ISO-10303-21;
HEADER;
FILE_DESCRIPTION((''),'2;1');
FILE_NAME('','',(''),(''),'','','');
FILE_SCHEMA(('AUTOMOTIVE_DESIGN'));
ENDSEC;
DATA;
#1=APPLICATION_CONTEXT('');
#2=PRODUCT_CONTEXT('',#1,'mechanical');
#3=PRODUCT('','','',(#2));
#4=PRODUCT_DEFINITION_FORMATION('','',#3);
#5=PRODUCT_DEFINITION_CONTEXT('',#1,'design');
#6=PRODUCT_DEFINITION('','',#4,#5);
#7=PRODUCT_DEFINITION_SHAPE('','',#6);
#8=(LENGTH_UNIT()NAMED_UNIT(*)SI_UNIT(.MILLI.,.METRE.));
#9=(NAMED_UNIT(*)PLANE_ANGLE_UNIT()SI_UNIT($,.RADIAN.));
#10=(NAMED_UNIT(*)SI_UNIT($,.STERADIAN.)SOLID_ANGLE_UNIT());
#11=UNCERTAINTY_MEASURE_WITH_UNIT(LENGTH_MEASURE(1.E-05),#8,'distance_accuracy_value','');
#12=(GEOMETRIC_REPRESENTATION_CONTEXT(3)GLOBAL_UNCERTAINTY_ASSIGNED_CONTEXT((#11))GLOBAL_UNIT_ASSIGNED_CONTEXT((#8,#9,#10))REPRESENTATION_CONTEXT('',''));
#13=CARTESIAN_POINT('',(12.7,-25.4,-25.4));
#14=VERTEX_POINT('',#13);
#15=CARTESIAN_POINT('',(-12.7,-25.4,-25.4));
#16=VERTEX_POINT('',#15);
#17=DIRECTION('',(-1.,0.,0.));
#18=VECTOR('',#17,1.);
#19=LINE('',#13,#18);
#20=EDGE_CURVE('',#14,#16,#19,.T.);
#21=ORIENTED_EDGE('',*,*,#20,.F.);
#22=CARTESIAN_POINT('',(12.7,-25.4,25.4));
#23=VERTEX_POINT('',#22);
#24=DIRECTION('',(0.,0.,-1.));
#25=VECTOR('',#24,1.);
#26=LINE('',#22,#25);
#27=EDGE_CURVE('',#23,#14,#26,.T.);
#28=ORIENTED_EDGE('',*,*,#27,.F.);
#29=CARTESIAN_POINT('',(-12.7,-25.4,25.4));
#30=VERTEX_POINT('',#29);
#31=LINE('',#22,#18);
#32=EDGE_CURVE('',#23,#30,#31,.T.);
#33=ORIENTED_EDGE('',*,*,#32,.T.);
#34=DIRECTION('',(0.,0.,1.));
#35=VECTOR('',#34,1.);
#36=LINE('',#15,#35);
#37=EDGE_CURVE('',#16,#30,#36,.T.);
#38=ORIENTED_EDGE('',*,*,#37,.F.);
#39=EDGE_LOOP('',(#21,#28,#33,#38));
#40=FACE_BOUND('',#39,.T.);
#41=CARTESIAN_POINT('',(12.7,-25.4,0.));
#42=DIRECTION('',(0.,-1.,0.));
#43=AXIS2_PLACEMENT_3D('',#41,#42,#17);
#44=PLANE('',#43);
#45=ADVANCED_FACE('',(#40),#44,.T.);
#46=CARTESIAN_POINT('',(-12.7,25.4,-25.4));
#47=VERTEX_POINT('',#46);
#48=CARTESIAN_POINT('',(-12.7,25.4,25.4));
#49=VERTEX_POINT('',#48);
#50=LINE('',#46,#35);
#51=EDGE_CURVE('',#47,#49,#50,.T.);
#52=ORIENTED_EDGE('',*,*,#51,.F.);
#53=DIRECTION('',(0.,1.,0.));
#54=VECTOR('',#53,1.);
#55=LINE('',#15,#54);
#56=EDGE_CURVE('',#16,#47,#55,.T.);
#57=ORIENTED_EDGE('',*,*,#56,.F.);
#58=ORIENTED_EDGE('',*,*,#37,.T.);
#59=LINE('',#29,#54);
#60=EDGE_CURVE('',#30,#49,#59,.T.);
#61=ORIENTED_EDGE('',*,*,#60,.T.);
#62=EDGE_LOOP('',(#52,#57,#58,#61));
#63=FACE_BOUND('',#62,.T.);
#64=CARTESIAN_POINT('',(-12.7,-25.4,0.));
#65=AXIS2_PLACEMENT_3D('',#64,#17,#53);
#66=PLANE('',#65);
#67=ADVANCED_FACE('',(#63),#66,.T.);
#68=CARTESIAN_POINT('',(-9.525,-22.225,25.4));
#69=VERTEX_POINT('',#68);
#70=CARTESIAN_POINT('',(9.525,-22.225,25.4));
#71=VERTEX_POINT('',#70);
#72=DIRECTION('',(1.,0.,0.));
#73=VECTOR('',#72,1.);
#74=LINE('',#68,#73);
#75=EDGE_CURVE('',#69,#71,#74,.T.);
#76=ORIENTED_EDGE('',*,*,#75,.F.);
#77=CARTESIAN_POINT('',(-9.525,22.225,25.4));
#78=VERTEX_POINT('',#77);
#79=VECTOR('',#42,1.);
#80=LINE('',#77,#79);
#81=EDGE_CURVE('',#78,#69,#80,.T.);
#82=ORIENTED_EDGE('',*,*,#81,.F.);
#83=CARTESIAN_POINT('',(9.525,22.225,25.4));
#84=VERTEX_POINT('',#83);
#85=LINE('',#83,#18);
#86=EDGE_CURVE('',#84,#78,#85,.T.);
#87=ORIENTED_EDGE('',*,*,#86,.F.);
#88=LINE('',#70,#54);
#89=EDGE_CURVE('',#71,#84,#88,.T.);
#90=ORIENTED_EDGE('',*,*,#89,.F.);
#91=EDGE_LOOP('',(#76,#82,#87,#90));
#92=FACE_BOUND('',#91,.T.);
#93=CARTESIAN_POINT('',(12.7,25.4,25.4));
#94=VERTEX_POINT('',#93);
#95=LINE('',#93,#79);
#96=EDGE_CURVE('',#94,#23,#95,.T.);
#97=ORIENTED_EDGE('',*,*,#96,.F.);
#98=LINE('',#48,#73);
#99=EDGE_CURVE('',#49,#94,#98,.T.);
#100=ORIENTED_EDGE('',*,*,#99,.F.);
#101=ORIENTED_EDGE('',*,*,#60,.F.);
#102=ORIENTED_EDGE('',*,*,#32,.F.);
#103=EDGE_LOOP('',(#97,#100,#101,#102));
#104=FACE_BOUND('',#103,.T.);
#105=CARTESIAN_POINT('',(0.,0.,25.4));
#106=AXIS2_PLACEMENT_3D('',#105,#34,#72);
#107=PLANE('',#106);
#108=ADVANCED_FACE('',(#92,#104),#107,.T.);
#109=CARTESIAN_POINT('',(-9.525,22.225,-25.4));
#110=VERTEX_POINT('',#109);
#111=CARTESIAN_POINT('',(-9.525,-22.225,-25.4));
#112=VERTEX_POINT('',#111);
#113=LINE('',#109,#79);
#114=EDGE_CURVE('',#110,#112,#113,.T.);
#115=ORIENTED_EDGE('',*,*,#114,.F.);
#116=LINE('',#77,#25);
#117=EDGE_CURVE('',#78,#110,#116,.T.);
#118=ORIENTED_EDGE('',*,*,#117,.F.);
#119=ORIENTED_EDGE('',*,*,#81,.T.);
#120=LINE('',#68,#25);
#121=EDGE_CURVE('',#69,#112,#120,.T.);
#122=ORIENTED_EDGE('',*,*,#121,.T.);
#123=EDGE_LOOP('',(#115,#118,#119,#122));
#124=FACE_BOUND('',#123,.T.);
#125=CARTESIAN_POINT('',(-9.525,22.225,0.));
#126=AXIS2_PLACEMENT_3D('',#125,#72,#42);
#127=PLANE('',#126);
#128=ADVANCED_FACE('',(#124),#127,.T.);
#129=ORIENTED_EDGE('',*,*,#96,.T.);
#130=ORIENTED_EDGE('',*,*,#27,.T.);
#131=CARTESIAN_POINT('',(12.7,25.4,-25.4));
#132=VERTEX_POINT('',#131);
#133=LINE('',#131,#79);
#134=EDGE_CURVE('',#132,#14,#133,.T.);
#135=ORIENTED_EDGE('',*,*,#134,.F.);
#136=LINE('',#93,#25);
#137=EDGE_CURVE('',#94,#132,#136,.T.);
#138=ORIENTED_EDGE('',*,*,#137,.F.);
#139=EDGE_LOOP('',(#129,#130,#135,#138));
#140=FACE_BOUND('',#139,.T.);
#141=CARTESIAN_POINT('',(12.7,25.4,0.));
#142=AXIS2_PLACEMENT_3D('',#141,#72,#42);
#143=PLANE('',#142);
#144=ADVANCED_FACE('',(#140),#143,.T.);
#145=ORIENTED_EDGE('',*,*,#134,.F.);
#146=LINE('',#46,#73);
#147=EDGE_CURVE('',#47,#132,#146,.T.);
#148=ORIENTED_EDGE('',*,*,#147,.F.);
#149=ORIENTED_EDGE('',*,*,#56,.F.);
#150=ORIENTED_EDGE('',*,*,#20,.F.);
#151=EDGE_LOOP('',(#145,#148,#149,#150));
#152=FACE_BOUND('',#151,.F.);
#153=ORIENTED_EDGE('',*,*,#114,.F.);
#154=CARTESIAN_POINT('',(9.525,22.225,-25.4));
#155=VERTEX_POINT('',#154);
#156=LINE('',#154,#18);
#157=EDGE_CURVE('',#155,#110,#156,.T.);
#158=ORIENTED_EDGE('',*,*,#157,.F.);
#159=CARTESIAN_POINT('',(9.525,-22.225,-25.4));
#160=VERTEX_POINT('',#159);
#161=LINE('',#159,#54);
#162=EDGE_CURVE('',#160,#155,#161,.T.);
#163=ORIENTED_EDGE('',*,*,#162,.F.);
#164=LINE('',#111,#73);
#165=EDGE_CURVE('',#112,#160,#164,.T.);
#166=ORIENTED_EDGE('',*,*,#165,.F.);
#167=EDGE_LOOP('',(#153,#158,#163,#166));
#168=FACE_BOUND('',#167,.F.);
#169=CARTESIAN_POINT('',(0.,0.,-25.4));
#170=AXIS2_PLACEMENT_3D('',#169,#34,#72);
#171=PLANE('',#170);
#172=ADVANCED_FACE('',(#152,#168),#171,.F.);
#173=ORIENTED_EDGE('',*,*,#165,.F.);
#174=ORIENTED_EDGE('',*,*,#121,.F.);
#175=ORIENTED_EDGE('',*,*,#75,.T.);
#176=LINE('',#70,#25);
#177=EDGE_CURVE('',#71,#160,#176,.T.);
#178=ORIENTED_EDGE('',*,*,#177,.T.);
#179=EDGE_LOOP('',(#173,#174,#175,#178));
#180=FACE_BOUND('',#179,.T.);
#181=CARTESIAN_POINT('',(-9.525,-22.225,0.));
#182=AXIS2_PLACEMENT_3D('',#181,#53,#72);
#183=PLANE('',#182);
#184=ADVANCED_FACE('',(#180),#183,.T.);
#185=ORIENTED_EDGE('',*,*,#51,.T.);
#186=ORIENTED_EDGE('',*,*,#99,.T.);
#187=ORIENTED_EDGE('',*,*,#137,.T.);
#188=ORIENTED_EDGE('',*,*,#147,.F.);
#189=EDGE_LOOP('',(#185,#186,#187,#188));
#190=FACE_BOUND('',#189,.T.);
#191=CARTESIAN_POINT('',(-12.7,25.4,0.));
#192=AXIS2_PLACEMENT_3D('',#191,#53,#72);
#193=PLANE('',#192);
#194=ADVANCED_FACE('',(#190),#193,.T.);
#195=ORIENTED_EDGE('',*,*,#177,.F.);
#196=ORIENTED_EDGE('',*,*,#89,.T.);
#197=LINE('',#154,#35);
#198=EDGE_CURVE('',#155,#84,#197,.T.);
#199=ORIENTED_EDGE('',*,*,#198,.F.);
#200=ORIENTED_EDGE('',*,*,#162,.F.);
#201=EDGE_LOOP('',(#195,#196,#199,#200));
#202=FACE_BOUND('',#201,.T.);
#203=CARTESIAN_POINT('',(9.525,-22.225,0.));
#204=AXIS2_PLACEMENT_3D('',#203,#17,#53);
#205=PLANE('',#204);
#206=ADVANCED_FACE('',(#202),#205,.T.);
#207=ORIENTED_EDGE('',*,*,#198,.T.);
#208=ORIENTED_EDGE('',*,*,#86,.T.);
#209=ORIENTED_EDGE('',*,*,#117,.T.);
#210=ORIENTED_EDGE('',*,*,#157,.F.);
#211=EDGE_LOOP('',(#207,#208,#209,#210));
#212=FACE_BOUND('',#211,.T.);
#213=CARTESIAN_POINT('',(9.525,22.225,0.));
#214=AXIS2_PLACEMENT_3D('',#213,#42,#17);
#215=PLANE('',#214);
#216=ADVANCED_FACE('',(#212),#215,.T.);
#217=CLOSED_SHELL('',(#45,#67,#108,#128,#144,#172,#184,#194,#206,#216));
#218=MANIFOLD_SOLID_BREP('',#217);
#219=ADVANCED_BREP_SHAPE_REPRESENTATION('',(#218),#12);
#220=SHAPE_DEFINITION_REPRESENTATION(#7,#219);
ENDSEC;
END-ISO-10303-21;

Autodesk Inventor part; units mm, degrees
ref_plane "YZ Plane" through (0, 0, 0) normal (1, 0, 0) x (0, 1, 0)
ref_plane "XZ Plane" through (0, 0, 0) normal (0, 1, 0) x (-1, 0, 0)
ref_plane "XY Plane" through (0, 0, 0) normal (0, 0, 1) x (1, 0, 0)
sketch "Sketch1" plane through (0, 0, 0) normal (0, 0, 1) x (1, 0, 0)
  line L0 (-12.7, 25.4) -> (12.7, 25.4)
  line L1 (12.7, 25.4) -> (12.7, -25.4)
  line L2 (12.7, -25.4) -> (-12.7, -25.4)
  line L3 (-12.7, -25.4) -> (-12.7, 25.4)
  line L4 (9.525, 22.225) -> (-9.525, 22.225)
  line L5 (-9.525, 22.225) -> (-9.525, -22.225)
  line L6 (-9.525, -22.225) -> (9.525, -22.225)
  line L7 (9.525, -22.225) -> (9.525, 22.225)
  point P0 (0, 0)
  point P1 (0, 25.4)
  point P2 (-12.7, 0)
extrude "Extrusion1" add sketch "Sketch1" along normal mid plane 50.8
properties part number "Aluminum Box Tube" material "Aluminum 6061"
